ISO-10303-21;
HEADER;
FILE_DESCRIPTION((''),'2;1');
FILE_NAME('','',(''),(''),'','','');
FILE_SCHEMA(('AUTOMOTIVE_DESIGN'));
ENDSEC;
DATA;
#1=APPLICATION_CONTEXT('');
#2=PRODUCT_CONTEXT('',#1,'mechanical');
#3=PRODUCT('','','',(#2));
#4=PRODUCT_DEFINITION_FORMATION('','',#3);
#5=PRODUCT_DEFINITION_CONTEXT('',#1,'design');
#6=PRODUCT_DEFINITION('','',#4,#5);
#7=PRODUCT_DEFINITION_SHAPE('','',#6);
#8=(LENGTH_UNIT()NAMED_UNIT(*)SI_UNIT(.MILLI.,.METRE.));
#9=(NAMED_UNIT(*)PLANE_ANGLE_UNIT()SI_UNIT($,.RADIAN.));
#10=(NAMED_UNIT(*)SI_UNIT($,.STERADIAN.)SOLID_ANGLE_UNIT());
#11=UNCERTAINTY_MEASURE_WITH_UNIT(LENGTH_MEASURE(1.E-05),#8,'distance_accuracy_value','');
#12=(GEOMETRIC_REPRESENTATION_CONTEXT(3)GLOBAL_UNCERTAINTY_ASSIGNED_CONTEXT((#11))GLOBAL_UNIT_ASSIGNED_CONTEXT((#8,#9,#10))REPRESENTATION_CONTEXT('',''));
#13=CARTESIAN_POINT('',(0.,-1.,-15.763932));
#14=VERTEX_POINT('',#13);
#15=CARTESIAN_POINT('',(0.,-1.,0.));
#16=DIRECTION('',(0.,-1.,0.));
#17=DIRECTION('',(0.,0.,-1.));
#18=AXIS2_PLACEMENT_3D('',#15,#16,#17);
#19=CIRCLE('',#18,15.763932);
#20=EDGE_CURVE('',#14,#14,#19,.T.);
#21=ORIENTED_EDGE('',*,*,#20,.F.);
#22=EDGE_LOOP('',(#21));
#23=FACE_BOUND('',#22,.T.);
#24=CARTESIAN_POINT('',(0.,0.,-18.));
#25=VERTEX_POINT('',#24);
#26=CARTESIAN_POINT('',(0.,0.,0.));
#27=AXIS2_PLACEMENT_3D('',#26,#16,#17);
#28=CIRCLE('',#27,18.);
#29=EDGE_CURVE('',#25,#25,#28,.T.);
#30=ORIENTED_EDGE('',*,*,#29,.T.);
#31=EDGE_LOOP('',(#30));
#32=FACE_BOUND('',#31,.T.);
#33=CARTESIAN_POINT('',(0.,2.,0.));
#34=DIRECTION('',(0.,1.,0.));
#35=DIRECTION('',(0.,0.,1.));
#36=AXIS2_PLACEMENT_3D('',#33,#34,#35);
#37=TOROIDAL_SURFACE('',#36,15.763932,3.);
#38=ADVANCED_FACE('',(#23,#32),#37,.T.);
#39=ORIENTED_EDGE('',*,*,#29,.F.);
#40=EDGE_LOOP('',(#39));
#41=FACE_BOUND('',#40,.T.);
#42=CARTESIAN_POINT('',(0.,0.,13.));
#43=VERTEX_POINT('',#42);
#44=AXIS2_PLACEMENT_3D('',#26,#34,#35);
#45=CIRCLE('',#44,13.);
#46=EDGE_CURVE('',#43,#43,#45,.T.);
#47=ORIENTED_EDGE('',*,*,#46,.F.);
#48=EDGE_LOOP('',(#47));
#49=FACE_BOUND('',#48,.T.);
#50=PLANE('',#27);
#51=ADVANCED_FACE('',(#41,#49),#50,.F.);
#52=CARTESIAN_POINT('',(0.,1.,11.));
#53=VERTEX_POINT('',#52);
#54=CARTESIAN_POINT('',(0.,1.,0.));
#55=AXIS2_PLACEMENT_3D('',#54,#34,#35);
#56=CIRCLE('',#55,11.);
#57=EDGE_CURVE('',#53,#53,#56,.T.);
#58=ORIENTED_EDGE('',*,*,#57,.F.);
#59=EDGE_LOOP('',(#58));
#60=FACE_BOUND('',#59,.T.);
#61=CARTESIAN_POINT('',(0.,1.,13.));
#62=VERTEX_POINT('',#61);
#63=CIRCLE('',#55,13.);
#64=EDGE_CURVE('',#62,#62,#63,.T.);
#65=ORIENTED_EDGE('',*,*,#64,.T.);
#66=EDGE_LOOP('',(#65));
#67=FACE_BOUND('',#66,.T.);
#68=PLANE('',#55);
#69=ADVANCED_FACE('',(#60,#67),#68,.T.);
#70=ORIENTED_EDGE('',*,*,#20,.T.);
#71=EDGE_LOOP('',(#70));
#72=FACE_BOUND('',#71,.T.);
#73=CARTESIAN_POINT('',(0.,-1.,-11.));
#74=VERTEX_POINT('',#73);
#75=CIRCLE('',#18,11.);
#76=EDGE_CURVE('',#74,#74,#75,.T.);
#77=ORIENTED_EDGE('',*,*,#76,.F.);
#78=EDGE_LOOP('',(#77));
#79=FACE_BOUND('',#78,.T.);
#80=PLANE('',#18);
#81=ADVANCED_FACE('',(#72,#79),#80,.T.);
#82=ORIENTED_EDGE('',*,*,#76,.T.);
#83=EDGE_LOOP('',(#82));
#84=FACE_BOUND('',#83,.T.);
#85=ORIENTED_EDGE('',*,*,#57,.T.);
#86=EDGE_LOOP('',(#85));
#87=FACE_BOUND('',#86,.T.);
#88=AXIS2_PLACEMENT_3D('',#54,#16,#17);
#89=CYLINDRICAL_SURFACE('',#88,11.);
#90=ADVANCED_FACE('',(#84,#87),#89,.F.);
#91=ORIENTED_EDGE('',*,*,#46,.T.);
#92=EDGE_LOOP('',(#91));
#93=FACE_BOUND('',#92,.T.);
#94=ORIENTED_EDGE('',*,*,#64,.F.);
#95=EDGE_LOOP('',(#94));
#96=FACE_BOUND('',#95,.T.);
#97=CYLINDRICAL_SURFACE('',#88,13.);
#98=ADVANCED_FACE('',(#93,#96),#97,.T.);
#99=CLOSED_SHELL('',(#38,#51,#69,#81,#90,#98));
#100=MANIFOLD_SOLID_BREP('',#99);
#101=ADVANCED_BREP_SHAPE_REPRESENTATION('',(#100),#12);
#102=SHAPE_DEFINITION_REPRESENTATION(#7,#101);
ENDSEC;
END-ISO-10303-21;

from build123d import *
from build123d.topology import SkipClean

# Parameters (mm, degrees)
SKETCH_1_R      = 13
SKETCH_1_R_2    = 11
EXTRUDE_1_DEPTH = 1
EXTRUDE_START   = 1
SKETCH_2_R      = 18
SKETCH_2_R_2    = 11
EXTRUDE_2_DEPTH = 1
FILLET_1_R      = 3


with BuildPart() as part:
    # Эскиз1 → Бобышка-Вытянуть1 (new body)
    with BuildSketch(Plane(origin=(0, 0, 0), x_dir=(1, 0, 0), z_dir=(0, 1, 0))):
        with Locations(Location((0, 0, 0), (0, 0, 270))):
            Circle(SKETCH_1_R)
        with Locations(Location((0, 0, 0), (0, 0, 270))):
            Circle(SKETCH_1_R_2, mode=Mode.SUBTRACT)
    extrude(amount=EXTRUDE_1_DEPTH)

    # Эскиз2 → Бобышка-Вытянуть2 (add)
    with SkipClean():  # the faces are left unmerged after this step: merging them gives an invalid solid
        with BuildSketch(Plane.XZ.offset(EXTRUDE_START)):
            with Locations(Location((0, 0, 0), (0, 0, 270))):
                Circle(SKETCH_2_R)
            with Locations(Location((0, 0, 0), (0, 0, 270))):
                Circle(SKETCH_2_R_2, mode=Mode.SUBTRACT)
        extrude(amount=-EXTRUDE_2_DEPTH)

    # Скругление1
    # the kernel refuses this fillet: 3 mm, written as the material it takes off along each edge
    with BuildSketch(Plane(origin=(0, -1, 0), x_dir=(0, 0, -1), z_dir=(-1, 0, 0))) as fillet_1_piece_1:
        with BuildLine():
            CenterArc((15.763932023, -3), FILLET_1_R, 41.810314896, 48.189685104)
            Line((15.763932023, 0), (15.763932023, 0.06))
            Line((15.763932023, 0.06), (18, 0.06))
            Line((18, 0.06), (18.06, 0))
            ThreePointArc((18.06, 0), (18.06, -0.5), (18.04472136, -0.96))
            Line((18.04472136, -0.96), (18, -1))
        make_face()
    revolve(axis=Axis((0, -1, 0), (0, -1, 0)), mode=Mode.SUBTRACT)


solid = part.part
